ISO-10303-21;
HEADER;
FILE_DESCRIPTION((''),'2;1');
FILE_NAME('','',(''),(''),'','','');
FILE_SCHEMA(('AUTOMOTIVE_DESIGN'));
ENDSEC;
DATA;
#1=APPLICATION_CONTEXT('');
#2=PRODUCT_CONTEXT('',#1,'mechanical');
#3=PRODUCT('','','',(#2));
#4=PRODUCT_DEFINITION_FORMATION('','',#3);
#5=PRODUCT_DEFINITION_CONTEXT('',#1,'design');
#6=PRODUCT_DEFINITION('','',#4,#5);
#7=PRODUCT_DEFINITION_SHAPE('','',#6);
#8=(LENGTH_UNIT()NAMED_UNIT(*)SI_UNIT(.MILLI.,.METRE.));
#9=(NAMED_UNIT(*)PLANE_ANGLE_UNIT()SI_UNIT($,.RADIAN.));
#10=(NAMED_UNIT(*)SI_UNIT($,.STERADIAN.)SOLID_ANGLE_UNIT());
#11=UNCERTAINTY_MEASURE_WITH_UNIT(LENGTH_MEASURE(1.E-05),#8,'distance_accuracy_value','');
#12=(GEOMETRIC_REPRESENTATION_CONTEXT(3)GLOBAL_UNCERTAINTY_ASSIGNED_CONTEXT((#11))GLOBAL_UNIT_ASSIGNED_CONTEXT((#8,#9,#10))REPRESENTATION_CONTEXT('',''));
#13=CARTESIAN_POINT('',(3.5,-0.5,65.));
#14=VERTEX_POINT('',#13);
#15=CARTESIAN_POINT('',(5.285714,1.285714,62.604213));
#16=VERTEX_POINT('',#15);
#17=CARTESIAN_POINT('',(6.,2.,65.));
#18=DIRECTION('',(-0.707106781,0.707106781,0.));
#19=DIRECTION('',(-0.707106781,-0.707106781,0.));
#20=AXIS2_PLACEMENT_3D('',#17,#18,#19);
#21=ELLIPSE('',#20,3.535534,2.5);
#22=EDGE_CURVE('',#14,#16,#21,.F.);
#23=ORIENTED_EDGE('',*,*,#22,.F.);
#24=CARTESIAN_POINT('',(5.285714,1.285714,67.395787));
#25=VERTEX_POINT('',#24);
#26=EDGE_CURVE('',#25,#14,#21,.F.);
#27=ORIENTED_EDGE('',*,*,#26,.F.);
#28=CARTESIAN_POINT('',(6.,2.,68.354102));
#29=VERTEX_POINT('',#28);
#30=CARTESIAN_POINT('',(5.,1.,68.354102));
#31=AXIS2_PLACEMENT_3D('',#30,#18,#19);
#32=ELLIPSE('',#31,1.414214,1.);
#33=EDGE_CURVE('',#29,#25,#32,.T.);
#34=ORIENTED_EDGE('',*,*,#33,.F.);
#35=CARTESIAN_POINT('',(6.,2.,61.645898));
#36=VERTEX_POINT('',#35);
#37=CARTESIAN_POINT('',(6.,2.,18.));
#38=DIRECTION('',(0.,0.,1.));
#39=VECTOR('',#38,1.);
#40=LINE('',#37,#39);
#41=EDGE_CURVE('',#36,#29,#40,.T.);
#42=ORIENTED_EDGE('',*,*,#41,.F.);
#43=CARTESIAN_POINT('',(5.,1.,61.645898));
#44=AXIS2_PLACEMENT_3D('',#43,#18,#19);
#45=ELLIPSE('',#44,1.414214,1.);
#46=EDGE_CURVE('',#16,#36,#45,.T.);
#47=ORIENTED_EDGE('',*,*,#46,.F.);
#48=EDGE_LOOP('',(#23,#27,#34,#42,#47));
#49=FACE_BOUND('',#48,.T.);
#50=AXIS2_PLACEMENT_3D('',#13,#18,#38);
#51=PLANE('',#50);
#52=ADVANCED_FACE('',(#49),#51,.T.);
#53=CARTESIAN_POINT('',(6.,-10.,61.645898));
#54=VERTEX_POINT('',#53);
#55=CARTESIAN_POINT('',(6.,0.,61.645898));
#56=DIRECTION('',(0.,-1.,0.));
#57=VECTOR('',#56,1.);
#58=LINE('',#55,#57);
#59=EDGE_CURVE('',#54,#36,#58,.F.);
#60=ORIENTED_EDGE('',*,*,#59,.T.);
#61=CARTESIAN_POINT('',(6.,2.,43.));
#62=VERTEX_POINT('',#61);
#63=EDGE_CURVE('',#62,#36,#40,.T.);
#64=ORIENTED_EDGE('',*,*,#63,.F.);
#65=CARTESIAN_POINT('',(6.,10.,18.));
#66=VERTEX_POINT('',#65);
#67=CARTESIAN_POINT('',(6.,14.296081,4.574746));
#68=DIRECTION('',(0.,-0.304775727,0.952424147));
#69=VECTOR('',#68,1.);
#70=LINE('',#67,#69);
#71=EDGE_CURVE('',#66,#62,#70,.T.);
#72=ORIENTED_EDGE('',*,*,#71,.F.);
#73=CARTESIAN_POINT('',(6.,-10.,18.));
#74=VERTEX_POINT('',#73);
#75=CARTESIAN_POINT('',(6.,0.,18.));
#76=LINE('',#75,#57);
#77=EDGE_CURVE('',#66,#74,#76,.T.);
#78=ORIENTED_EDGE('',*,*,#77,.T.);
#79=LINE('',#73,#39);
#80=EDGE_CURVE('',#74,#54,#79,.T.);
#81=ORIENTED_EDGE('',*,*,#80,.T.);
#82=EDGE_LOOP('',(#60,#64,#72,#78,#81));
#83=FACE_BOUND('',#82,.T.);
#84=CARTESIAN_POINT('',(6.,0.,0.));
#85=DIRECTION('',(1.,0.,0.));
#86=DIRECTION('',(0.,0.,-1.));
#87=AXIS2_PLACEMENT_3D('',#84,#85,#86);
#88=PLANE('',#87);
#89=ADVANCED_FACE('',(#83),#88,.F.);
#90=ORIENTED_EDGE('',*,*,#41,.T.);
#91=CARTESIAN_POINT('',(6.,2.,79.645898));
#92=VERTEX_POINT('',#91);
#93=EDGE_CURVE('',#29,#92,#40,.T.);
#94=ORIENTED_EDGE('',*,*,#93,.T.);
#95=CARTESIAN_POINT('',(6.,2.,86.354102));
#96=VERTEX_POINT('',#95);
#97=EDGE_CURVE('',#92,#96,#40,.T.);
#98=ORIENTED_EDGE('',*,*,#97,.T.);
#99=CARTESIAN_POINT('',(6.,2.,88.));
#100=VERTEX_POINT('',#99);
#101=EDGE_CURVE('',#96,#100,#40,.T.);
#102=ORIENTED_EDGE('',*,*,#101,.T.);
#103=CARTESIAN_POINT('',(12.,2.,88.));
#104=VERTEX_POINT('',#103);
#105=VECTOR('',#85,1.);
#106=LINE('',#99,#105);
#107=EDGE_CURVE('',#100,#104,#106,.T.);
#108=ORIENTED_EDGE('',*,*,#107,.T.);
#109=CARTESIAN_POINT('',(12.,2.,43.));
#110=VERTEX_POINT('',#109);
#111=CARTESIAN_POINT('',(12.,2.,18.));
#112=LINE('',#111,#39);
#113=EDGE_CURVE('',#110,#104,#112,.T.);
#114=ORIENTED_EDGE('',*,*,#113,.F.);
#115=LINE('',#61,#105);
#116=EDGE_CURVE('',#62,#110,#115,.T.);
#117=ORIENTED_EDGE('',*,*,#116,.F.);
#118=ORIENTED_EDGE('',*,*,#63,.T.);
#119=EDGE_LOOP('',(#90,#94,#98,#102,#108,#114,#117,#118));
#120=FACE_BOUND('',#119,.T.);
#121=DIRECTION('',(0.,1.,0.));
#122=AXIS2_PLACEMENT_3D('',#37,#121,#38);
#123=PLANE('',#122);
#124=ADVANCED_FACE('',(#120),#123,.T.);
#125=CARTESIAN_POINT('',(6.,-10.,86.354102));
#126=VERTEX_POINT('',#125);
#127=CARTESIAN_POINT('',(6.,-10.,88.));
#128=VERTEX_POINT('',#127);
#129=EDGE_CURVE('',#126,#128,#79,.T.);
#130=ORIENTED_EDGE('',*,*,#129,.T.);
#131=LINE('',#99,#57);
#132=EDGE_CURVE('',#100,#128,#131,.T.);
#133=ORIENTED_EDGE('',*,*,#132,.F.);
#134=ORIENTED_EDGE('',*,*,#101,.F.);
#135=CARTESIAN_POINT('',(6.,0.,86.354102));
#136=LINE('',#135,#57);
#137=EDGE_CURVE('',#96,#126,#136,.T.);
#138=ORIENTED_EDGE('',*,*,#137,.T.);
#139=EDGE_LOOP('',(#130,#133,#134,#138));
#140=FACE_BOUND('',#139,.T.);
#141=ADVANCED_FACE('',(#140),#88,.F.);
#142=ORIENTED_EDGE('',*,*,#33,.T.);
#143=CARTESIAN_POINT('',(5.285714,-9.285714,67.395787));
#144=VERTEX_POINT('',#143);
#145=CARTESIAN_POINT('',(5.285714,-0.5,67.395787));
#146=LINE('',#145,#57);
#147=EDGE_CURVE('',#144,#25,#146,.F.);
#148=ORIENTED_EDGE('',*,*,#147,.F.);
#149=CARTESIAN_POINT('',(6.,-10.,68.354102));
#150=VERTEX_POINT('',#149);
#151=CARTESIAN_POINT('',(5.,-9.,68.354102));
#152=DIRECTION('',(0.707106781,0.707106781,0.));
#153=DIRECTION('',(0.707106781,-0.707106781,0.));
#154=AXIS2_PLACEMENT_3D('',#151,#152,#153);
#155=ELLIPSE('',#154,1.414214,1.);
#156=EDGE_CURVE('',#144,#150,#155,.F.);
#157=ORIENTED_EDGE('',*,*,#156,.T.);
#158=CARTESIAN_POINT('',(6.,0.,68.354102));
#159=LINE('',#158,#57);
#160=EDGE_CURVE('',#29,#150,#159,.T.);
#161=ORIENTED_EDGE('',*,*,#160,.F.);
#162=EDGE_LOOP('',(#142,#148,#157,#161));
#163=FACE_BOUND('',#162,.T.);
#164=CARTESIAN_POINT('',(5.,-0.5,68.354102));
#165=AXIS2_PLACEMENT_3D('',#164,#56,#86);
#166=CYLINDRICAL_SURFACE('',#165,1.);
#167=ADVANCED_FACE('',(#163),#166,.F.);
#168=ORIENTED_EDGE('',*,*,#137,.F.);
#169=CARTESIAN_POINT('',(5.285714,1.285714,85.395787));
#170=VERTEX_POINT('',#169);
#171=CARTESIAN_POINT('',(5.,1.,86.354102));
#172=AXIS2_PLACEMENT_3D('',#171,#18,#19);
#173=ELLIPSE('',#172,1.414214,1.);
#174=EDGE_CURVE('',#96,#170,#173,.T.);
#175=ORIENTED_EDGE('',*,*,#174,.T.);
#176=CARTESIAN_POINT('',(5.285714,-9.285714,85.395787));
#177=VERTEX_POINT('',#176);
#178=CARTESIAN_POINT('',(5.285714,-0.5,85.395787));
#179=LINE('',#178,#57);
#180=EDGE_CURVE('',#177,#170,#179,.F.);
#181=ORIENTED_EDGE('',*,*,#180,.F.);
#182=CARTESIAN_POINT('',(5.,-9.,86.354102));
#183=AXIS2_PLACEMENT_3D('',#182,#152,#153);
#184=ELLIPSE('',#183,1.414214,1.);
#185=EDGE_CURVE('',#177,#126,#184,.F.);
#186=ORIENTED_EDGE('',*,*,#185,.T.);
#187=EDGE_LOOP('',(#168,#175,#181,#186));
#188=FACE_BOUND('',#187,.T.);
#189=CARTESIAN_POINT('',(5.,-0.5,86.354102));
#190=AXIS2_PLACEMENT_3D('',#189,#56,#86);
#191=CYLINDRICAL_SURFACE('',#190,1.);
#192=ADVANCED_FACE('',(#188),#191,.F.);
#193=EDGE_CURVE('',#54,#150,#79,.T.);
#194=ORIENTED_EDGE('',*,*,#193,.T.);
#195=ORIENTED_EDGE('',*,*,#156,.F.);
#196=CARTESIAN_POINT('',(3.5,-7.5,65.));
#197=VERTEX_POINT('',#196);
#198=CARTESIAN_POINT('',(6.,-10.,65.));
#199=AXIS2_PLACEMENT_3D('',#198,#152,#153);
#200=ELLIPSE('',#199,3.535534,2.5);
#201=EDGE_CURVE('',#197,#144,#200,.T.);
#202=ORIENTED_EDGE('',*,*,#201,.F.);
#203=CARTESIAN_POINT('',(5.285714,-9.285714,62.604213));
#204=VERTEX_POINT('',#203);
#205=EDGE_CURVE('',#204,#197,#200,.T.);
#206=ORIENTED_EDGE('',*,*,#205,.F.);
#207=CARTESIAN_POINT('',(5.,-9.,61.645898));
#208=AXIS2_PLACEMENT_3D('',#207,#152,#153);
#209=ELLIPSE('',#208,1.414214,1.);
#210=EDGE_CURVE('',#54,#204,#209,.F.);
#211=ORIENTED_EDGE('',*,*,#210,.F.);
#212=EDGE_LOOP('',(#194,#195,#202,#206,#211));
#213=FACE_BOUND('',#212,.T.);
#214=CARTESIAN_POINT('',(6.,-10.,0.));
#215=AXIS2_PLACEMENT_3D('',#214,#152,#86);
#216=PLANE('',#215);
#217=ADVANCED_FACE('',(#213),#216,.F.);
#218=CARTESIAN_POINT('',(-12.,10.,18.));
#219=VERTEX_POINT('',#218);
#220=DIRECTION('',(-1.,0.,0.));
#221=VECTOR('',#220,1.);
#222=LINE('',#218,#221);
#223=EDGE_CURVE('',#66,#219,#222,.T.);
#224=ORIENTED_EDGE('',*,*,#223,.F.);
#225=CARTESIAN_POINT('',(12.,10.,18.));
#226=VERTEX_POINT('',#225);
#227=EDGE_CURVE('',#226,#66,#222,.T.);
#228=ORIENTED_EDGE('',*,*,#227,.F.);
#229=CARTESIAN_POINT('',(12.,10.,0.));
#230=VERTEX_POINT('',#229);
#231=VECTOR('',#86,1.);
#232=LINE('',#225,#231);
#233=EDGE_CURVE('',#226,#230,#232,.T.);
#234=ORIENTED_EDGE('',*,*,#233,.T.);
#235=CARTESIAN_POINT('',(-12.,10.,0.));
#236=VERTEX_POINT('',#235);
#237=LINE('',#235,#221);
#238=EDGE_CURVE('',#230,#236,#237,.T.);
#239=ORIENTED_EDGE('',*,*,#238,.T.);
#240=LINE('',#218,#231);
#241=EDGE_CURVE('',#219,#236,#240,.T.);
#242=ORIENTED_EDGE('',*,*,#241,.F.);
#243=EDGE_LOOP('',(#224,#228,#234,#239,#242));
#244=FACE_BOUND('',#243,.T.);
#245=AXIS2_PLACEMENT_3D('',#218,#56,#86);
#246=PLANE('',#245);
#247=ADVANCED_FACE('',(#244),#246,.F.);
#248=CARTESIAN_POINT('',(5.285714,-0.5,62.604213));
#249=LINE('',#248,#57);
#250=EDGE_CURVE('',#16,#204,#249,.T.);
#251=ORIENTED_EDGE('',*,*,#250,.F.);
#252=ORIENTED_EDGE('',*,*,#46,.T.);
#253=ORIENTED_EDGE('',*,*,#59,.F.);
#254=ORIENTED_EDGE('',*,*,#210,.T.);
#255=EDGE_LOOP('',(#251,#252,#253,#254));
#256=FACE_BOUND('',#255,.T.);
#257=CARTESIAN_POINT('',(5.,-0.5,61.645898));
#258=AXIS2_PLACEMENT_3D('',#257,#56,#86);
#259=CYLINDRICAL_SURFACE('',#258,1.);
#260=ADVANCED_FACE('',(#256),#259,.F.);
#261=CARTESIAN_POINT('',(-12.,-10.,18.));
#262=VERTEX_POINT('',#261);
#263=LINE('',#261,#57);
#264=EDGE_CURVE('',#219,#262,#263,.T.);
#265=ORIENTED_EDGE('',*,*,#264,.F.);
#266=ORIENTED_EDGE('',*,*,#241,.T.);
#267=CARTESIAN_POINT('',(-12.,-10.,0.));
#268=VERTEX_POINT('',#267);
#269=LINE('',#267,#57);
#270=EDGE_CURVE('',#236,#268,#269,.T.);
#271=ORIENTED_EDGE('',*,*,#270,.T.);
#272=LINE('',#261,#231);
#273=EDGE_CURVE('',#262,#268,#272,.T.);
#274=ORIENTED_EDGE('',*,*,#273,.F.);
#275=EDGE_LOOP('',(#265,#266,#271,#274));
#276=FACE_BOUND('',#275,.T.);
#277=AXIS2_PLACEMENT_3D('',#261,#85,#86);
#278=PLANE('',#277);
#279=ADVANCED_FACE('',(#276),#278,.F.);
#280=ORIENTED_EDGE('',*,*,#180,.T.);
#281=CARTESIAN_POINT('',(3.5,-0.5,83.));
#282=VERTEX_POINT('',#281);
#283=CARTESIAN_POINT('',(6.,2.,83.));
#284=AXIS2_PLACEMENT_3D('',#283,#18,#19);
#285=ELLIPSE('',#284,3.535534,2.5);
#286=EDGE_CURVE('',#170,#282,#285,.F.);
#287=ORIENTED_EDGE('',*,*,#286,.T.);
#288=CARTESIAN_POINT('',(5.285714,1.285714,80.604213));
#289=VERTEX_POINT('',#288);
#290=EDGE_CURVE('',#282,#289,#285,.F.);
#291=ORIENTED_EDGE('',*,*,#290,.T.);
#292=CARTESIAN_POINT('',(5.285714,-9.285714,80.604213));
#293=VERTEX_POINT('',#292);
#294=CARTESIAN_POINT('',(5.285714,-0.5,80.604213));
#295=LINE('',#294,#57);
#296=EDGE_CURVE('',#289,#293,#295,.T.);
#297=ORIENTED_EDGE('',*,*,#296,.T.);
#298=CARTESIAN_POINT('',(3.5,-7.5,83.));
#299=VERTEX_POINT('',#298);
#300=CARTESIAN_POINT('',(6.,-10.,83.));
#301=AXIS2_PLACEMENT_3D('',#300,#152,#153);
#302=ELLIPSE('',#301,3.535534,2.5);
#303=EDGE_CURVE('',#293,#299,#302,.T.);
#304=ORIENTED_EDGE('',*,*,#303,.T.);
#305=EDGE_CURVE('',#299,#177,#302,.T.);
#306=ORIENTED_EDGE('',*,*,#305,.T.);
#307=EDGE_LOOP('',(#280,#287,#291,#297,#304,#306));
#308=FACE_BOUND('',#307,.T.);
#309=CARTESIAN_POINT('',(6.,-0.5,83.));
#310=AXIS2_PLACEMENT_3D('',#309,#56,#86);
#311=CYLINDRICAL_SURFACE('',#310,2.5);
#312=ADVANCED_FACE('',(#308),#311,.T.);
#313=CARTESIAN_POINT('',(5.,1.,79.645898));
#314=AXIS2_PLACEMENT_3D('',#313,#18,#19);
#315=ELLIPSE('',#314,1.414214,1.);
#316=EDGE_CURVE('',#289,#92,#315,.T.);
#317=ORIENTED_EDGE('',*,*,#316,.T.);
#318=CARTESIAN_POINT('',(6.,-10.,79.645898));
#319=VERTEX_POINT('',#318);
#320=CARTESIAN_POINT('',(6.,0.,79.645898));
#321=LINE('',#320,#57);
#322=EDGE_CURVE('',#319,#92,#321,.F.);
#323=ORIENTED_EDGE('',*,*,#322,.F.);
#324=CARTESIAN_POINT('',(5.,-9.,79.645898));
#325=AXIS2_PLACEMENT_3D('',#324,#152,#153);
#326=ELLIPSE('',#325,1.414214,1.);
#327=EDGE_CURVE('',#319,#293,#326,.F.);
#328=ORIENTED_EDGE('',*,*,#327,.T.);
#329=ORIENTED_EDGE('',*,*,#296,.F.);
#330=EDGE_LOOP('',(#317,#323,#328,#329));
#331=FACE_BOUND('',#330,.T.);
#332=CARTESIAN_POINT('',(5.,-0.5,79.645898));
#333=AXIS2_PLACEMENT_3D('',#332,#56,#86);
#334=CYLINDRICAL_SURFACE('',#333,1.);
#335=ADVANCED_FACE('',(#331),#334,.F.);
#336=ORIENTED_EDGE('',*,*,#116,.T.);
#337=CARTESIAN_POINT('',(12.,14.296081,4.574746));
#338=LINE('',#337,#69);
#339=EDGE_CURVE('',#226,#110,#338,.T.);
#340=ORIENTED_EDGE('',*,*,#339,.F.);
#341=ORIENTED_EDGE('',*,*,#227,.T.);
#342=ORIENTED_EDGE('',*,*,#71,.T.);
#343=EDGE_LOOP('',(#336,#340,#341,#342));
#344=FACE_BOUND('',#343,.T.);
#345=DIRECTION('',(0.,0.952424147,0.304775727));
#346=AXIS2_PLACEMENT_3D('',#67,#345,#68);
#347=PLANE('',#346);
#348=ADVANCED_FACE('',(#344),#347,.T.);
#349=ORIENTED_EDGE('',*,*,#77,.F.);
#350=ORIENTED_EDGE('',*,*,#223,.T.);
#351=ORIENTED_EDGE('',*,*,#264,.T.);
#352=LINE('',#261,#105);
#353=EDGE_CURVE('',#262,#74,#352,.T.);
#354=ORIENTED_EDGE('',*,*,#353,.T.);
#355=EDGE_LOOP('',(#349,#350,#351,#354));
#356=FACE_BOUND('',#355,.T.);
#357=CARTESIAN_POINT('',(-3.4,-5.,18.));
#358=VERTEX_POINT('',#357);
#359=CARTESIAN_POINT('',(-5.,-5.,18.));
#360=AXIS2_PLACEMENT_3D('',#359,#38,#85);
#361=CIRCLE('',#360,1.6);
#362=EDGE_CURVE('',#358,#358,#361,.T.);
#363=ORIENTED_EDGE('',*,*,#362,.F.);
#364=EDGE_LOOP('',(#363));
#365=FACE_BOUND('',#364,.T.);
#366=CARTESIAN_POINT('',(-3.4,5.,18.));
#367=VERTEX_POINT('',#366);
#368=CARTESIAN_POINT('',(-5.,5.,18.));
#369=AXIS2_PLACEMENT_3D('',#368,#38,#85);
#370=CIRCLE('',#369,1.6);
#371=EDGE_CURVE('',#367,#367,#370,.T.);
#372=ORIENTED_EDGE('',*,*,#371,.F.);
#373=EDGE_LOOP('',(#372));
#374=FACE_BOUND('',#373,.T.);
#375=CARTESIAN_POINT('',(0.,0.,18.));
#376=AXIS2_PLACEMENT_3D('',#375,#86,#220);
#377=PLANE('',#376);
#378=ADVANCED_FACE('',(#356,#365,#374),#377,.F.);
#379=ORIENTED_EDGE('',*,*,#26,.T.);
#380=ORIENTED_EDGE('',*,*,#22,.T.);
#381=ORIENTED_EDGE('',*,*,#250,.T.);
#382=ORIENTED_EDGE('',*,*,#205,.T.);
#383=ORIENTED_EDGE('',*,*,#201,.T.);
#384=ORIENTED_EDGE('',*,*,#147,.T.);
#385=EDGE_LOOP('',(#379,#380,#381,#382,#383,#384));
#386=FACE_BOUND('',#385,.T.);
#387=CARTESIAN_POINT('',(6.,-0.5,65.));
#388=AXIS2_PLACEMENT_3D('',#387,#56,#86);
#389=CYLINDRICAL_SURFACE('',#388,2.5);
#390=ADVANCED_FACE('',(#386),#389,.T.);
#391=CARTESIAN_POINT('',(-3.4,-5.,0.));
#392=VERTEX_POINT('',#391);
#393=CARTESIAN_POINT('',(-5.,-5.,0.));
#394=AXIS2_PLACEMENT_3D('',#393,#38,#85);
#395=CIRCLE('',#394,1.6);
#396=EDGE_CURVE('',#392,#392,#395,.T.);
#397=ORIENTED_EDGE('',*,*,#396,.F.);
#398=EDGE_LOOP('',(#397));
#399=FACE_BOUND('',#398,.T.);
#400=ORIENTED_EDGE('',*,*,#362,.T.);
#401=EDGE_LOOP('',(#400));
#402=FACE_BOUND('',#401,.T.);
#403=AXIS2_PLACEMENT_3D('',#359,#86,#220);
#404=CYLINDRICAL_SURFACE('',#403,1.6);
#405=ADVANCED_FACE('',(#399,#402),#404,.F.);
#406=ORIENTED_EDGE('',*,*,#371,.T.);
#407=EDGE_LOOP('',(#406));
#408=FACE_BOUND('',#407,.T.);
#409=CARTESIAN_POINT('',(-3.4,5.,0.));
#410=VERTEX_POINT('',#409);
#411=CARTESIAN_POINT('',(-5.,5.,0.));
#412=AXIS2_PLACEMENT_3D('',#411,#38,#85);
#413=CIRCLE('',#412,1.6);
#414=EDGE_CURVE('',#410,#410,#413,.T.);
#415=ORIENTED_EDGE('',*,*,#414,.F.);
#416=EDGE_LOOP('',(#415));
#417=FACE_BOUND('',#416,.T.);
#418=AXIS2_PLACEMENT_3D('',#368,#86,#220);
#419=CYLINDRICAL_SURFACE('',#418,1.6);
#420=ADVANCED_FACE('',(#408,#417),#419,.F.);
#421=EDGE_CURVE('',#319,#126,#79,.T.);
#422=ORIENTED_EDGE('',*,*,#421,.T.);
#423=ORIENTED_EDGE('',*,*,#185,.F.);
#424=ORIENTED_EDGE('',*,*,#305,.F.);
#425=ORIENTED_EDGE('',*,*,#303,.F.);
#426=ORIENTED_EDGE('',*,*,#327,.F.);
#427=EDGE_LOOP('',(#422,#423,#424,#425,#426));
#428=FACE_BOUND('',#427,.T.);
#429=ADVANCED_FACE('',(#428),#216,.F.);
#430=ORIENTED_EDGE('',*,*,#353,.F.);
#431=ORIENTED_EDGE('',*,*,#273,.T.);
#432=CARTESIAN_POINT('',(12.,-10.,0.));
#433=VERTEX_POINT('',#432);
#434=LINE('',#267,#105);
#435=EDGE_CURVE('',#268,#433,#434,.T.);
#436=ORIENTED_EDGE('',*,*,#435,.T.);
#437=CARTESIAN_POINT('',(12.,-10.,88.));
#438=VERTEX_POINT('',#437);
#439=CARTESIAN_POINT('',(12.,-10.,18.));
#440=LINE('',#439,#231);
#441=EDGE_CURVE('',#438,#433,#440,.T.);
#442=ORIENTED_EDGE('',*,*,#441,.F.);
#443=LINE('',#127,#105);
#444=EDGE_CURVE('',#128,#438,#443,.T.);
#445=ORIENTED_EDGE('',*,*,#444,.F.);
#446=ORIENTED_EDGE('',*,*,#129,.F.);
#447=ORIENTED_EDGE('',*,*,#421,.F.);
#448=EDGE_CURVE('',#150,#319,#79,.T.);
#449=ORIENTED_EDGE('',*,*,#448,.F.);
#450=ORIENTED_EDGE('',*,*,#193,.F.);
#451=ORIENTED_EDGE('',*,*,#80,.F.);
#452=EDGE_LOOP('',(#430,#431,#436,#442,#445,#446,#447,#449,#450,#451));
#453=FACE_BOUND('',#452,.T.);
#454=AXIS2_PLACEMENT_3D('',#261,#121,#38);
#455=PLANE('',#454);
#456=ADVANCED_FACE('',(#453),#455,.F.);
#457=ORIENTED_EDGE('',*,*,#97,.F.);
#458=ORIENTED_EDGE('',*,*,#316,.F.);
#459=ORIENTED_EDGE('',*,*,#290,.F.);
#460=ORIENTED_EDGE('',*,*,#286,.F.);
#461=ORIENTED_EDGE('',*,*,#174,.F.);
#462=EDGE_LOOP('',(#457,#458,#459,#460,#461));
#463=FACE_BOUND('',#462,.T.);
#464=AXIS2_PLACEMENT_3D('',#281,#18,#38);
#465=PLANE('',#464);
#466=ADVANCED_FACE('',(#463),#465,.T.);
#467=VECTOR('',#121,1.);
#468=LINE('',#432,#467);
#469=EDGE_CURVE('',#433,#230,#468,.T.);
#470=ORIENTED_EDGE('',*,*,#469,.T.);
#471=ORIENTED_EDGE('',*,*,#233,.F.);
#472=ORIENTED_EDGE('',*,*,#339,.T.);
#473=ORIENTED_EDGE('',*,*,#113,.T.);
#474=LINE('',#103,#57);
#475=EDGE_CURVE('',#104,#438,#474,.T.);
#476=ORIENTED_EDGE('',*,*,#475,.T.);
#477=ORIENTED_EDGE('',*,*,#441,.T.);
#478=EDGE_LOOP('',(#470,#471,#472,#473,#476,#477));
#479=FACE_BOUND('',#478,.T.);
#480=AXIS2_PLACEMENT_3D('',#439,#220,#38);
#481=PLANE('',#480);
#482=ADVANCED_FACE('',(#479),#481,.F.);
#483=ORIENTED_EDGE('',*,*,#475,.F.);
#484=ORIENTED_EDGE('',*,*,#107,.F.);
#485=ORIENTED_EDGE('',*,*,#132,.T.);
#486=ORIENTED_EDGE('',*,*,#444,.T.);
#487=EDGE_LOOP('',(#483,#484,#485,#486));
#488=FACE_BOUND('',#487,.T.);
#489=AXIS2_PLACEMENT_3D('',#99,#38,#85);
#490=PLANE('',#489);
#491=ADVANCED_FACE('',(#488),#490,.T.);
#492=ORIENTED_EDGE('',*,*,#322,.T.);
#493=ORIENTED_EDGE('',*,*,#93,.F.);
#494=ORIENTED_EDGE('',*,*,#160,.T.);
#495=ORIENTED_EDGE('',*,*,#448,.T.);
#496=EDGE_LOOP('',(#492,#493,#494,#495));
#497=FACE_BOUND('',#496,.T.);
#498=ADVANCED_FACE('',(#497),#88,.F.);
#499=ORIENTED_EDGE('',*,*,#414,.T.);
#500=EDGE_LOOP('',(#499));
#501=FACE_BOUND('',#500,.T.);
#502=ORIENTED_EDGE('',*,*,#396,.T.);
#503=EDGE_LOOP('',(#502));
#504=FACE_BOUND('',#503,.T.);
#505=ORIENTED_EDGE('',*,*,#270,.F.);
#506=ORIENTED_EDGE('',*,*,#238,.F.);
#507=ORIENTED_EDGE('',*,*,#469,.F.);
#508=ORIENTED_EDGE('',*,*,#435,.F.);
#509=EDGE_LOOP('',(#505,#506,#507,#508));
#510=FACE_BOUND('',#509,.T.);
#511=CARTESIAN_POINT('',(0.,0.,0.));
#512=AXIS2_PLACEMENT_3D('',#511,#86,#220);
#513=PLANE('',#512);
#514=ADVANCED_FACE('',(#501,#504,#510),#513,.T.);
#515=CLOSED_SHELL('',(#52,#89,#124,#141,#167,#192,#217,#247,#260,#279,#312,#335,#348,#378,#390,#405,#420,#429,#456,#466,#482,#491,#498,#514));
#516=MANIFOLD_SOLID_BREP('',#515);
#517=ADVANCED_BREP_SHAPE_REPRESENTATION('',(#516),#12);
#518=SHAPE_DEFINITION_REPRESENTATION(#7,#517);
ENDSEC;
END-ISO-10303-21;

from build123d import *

# Parameters (mm, degrees)
SKETCH1_W           = 24
SKETCH1_H           = 20
SKETCH1_R           = 1.6
BOSS_EXTRUDE1_DEPTH = 18
BOSS_EXTRUDE2_DEPTH = 6
SKETCH3_R           = 2.5
BOSS_EXTRUDE3_DEPTH = 7
FILLET1_R           = 1
CHAMFER1_SIZE       = 2.5


with BuildPart() as part:
    # Sketch1 → Boss-Extrude1 (new body)
    with BuildSketch(Plane.XY):
        Rectangle(SKETCH1_W, SKETCH1_H)
        with Locations((-5, 5)):
            Circle(SKETCH1_R, mode=Mode.SUBTRACT)
        with Locations((-5, -5)):
            Circle(SKETCH1_R, mode=Mode.SUBTRACT)
    extrude(amount=BOSS_EXTRUDE1_DEPTH)

    # Sketch2 → Boss-Extrude2 (add)
    with BuildSketch(Plane(origin=(12, 0, 0), x_dir=(0, 0, -1), z_dir=(1, 0, 0))):
        Polygon((-18, -10), (-18, 10), (-43, 2), (-88, 2), (-88, -10), align=None)
    extrude(amount=-BOSS_EXTRUDE2_DEPTH)

    # Sketch3 → Boss-Extrude3 (add)
    with BuildSketch(Plane(origin=(0, -7.5, 0), x_dir=(-1, 0, 0), z_dir=(0, -1, 0))):
        with Locations((-6, -83)):
            Circle(SKETCH3_R)
        with Locations((-6, -65)):
            Circle(SKETCH3_R)
    extrude(amount=-BOSS_EXTRUDE3_DEPTH)

    # Fillet1
    fillet1_edges = [part.edges().sort_by_distance(p)[0] for p in [
        (6, -4, 80.5),
        (6, -4, 85.5),
        (6, -4, 62.5),
        (6, -4, 67.5),
    ]]
    fillet(fillet1_edges, radius=FILLET1_R)

    # Chamfer1
    chamfer1_edges = [part.edges().sort_by_distance(p)[0] for p in [
        (6, -0.5, 83),
    ]]
    chamfer(chamfer1_edges, length=CHAMFER1_SIZE - 0.0001)  # a hair under: the kernel refuses the full size
    chamfer1_2_edges = [part.edges().sort_by_distance(p)[0] for p in [
        (6, -7.5, 83),
    ]]
    chamfer(chamfer1_2_edges, length=CHAMFER1_SIZE - 0.0001)  # a hair under: the kernel refuses the full size
    chamfer1_3_edges = [part.edges().sort_by_distance(p)[0] for p in [
        (6, -0.5, 65),
    ]]
    chamfer(chamfer1_3_edges, length=CHAMFER1_SIZE - 0.0001)  # a hair under: the kernel refuses the full size
    chamfer1_4_edges = [part.edges().sort_by_distance(p)[0] for p in [
        (6, -7.5, 65),
    ]]
    chamfer(chamfer1_4_edges, length=CHAMFER1_SIZE - 0.0001)  # a hair under: the kernel refuses the full size


solid = part.part
